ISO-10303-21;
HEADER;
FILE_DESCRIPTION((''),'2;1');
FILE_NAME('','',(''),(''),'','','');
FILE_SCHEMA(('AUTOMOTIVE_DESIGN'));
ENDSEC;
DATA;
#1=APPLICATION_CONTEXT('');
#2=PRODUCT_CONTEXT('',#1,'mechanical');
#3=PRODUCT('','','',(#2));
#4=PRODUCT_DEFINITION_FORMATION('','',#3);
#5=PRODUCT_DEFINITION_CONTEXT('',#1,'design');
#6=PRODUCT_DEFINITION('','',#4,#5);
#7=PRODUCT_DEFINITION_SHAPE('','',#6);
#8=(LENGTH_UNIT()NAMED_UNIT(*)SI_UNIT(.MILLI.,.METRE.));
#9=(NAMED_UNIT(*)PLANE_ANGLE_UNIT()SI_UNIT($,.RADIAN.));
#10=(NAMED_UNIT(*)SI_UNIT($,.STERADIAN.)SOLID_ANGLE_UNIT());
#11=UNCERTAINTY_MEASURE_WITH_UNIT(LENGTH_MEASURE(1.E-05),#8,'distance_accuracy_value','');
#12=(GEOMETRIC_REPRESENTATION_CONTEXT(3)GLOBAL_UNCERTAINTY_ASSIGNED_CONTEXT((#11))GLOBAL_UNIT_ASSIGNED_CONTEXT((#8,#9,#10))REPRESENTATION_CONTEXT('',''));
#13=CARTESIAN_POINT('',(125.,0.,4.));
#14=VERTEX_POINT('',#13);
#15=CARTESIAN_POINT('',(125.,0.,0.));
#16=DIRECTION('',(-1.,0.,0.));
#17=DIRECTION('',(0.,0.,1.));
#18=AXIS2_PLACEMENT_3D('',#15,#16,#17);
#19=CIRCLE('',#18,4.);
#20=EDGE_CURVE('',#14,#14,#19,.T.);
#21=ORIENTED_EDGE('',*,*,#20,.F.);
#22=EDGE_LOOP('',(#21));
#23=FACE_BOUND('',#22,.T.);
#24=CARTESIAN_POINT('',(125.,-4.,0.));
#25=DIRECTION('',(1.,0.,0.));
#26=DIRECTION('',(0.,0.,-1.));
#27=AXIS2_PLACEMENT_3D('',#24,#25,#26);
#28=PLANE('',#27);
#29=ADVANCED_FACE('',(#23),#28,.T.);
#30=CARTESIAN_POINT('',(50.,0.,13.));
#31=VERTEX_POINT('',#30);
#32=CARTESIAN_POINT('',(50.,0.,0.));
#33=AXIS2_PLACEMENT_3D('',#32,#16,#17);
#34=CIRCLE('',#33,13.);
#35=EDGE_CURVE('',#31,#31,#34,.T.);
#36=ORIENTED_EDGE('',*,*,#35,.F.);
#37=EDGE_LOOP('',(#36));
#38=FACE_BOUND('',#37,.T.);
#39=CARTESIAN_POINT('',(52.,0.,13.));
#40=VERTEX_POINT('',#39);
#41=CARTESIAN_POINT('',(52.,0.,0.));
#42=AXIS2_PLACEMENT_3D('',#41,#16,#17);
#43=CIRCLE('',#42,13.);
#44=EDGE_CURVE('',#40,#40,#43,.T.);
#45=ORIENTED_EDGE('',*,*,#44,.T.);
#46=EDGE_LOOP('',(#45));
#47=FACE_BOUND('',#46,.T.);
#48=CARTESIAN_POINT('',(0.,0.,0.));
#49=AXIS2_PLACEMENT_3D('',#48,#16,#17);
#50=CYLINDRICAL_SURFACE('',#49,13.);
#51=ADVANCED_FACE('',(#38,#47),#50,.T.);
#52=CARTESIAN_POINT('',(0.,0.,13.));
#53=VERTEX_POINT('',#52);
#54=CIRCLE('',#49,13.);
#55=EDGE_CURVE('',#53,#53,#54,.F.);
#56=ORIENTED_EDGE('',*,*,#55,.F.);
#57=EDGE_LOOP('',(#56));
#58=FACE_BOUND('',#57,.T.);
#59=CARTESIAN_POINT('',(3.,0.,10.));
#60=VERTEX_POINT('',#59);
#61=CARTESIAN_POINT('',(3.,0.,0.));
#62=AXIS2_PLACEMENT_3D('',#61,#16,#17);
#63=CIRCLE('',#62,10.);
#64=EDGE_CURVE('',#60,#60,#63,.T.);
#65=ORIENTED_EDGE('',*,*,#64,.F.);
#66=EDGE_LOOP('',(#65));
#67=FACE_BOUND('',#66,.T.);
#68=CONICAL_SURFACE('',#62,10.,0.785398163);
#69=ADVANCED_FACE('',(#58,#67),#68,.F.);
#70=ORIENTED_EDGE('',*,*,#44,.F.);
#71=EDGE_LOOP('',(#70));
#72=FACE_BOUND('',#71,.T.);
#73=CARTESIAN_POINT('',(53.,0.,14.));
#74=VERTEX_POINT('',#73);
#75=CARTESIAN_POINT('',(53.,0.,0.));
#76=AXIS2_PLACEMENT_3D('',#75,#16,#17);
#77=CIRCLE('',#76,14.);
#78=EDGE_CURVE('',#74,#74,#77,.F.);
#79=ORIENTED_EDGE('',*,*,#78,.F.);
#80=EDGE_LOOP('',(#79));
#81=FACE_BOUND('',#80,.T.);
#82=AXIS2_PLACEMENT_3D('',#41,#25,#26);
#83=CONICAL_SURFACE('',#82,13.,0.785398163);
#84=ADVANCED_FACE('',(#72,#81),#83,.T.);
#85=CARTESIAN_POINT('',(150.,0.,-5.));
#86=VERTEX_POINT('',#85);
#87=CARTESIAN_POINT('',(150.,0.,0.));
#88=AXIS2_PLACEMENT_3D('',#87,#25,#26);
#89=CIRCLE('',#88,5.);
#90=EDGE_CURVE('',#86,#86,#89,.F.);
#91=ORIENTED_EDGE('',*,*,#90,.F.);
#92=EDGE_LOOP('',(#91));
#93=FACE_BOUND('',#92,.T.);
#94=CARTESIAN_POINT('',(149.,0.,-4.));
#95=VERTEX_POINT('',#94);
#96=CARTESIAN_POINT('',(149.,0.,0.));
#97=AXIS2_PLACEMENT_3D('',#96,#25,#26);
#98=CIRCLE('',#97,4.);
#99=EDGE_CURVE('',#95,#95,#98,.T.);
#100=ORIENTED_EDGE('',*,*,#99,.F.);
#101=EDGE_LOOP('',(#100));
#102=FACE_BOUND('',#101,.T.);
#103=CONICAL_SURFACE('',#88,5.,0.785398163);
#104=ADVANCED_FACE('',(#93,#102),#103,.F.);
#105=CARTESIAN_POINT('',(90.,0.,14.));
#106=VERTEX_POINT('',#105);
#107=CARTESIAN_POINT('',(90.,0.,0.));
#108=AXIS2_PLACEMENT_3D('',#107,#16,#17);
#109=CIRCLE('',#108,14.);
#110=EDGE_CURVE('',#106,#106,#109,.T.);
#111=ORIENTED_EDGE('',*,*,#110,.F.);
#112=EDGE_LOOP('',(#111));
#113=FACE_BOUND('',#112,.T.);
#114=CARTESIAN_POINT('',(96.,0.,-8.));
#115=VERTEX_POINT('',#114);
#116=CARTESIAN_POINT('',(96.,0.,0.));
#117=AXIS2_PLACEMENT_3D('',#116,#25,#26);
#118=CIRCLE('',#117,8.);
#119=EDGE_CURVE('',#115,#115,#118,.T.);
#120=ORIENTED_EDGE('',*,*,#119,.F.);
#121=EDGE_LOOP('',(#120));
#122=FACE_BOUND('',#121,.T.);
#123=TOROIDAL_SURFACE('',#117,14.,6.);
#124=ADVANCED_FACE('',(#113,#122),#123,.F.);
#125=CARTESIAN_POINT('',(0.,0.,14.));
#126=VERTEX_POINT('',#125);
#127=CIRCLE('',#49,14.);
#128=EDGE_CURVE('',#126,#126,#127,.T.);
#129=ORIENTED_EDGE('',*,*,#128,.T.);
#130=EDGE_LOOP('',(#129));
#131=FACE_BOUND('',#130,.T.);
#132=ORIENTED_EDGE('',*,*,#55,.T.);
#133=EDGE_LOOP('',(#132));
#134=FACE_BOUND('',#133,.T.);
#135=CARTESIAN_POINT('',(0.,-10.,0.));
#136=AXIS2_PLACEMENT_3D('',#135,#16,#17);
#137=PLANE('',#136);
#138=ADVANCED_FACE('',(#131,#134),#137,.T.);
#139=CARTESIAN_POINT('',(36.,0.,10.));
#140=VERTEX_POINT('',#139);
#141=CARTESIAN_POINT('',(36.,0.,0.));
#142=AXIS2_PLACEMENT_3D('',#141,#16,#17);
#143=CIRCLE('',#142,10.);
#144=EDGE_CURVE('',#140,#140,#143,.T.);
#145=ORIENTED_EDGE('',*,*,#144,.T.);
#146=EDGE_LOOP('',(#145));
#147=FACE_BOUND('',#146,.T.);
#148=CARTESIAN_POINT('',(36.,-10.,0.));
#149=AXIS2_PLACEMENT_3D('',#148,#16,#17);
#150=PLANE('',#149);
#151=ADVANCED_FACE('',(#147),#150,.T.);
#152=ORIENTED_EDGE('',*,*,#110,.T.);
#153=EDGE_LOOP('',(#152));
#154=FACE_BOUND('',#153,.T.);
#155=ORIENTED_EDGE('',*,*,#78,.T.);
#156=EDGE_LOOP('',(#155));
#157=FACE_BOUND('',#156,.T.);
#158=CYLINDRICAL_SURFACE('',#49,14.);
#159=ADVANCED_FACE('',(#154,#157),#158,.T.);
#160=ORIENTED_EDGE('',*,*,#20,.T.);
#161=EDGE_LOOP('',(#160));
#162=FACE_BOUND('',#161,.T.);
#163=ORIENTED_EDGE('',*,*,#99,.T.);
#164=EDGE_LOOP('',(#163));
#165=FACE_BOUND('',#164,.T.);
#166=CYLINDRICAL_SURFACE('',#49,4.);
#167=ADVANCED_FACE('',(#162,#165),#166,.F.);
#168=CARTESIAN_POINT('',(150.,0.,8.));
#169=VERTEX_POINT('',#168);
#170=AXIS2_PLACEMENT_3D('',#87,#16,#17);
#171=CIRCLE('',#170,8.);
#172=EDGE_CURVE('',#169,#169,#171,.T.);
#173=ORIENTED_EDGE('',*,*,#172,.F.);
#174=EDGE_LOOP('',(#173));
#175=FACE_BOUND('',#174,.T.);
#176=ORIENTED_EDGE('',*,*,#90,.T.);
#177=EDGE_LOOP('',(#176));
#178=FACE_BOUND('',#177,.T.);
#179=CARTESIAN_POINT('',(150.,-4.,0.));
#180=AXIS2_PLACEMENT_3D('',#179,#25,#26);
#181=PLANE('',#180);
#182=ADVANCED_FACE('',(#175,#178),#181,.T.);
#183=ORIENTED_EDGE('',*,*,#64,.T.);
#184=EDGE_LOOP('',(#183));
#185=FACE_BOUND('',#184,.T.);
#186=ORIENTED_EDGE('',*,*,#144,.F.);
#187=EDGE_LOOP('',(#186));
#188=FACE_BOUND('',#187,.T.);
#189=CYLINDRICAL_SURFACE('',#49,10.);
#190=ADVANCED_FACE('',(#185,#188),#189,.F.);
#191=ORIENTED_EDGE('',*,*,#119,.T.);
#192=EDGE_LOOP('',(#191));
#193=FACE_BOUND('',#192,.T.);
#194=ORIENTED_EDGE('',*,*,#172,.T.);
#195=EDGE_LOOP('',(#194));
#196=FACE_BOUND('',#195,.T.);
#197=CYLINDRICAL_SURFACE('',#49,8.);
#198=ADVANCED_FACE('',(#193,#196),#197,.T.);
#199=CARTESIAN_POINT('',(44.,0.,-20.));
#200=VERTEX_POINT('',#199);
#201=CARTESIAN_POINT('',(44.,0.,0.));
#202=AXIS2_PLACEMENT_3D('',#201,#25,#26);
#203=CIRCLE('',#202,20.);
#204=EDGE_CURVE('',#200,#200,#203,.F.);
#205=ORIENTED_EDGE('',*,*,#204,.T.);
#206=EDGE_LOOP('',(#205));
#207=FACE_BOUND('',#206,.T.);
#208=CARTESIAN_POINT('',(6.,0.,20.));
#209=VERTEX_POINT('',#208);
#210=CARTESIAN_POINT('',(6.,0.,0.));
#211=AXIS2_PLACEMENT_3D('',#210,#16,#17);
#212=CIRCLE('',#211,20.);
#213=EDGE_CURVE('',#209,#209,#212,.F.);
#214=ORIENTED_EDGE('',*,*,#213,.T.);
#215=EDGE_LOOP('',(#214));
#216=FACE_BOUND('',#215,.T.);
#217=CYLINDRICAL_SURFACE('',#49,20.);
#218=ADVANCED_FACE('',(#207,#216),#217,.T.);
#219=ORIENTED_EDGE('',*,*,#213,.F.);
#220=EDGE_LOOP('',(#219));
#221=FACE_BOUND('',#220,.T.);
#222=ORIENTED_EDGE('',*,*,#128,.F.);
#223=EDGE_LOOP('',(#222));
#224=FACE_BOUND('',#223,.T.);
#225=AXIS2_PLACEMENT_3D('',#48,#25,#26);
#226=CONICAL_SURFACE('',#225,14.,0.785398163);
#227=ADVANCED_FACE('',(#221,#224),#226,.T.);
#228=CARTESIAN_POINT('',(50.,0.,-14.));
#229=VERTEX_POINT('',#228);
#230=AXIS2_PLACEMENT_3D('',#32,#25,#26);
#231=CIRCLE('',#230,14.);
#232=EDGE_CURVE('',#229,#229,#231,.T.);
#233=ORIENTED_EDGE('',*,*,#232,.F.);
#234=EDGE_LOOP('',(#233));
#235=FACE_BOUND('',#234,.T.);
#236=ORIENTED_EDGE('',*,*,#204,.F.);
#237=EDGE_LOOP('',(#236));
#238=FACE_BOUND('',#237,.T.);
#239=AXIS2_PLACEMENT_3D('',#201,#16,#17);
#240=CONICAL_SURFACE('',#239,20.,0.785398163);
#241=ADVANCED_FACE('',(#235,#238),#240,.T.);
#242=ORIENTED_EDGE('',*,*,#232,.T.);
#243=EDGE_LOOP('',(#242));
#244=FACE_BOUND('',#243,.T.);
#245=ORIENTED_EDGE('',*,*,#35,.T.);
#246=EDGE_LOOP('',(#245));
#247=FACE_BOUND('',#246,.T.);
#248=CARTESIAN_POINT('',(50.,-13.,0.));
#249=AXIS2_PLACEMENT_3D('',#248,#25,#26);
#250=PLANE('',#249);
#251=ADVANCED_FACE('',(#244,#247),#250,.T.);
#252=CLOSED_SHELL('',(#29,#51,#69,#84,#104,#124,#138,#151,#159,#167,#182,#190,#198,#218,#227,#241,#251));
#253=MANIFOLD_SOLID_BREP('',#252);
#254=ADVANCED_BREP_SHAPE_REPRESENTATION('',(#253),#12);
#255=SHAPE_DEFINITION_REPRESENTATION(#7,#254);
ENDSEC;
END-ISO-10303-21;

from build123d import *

# Parameters (mm, degrees)
CHAMFER2_SIZE = 6
CHAMFER3_SIZE = 3
CHAMFER4_SIZE = 1
FILLET1_R     = 6
CHAMFER5_SIZE = 1


with BuildPart() as part:
    # Sketch1 → Revolve2 (revolve)
    with BuildSketch(Plane.XY, mode=Mode.PRIVATE) as revolve2_sk:
        Polygon((0, -10), (0, -20), (50, -20), (50, -13), (52, -13), (52, -14), (90, -14), (90, -8), (150, -8), (150, -4), (125, -4), (125, 0), (36, 0), (36, -10), align=None)
    revolve(revolve2_sk.sketch.rotate(Axis((0, 0, 0), (1, 0, 0)), 270), axis=Axis((0, 0, 0), (1, 0, 0)))

    # Chamfer2
    chamfer2_edges = [part.edges().sort_by_distance(p)[0] for p in [
        (0, 0, -20),
        (50, 0, -20),
    ]]
    chamfer(chamfer2_edges, length=CHAMFER2_SIZE)

    # Chamfer3
    chamfer3_edges = [part.edges().sort_by_distance(p)[0] for p in [
        (0, 0, -10),
    ]]
    chamfer(chamfer3_edges, length=CHAMFER3_SIZE)

    # Chamfer4
    chamfer4_edges = [part.edges().sort_by_distance(p)[0] for p in [
        (150, 0, -4),
    ]]
    chamfer(chamfer4_edges, length=CHAMFER4_SIZE)

    # Fillet1
    fillet1_edges = [part.edges().sort_by_distance(p)[0] for p in [
        (90, 0, -8),
    ]]
    fillet(fillet1_edges, radius=FILLET1_R - 0.0001)  # a hair under: the kernel refuses the full size

    # Chamfer5
    chamfer5_edges = [part.edges().sort_by_distance(p)[0] for p in [
        (52, 0, -14),
    ]]
    chamfer(chamfer5_edges, length=CHAMFER5_SIZE - 0.0001)  # a hair under: the kernel refuses the full size


solid = part.part
